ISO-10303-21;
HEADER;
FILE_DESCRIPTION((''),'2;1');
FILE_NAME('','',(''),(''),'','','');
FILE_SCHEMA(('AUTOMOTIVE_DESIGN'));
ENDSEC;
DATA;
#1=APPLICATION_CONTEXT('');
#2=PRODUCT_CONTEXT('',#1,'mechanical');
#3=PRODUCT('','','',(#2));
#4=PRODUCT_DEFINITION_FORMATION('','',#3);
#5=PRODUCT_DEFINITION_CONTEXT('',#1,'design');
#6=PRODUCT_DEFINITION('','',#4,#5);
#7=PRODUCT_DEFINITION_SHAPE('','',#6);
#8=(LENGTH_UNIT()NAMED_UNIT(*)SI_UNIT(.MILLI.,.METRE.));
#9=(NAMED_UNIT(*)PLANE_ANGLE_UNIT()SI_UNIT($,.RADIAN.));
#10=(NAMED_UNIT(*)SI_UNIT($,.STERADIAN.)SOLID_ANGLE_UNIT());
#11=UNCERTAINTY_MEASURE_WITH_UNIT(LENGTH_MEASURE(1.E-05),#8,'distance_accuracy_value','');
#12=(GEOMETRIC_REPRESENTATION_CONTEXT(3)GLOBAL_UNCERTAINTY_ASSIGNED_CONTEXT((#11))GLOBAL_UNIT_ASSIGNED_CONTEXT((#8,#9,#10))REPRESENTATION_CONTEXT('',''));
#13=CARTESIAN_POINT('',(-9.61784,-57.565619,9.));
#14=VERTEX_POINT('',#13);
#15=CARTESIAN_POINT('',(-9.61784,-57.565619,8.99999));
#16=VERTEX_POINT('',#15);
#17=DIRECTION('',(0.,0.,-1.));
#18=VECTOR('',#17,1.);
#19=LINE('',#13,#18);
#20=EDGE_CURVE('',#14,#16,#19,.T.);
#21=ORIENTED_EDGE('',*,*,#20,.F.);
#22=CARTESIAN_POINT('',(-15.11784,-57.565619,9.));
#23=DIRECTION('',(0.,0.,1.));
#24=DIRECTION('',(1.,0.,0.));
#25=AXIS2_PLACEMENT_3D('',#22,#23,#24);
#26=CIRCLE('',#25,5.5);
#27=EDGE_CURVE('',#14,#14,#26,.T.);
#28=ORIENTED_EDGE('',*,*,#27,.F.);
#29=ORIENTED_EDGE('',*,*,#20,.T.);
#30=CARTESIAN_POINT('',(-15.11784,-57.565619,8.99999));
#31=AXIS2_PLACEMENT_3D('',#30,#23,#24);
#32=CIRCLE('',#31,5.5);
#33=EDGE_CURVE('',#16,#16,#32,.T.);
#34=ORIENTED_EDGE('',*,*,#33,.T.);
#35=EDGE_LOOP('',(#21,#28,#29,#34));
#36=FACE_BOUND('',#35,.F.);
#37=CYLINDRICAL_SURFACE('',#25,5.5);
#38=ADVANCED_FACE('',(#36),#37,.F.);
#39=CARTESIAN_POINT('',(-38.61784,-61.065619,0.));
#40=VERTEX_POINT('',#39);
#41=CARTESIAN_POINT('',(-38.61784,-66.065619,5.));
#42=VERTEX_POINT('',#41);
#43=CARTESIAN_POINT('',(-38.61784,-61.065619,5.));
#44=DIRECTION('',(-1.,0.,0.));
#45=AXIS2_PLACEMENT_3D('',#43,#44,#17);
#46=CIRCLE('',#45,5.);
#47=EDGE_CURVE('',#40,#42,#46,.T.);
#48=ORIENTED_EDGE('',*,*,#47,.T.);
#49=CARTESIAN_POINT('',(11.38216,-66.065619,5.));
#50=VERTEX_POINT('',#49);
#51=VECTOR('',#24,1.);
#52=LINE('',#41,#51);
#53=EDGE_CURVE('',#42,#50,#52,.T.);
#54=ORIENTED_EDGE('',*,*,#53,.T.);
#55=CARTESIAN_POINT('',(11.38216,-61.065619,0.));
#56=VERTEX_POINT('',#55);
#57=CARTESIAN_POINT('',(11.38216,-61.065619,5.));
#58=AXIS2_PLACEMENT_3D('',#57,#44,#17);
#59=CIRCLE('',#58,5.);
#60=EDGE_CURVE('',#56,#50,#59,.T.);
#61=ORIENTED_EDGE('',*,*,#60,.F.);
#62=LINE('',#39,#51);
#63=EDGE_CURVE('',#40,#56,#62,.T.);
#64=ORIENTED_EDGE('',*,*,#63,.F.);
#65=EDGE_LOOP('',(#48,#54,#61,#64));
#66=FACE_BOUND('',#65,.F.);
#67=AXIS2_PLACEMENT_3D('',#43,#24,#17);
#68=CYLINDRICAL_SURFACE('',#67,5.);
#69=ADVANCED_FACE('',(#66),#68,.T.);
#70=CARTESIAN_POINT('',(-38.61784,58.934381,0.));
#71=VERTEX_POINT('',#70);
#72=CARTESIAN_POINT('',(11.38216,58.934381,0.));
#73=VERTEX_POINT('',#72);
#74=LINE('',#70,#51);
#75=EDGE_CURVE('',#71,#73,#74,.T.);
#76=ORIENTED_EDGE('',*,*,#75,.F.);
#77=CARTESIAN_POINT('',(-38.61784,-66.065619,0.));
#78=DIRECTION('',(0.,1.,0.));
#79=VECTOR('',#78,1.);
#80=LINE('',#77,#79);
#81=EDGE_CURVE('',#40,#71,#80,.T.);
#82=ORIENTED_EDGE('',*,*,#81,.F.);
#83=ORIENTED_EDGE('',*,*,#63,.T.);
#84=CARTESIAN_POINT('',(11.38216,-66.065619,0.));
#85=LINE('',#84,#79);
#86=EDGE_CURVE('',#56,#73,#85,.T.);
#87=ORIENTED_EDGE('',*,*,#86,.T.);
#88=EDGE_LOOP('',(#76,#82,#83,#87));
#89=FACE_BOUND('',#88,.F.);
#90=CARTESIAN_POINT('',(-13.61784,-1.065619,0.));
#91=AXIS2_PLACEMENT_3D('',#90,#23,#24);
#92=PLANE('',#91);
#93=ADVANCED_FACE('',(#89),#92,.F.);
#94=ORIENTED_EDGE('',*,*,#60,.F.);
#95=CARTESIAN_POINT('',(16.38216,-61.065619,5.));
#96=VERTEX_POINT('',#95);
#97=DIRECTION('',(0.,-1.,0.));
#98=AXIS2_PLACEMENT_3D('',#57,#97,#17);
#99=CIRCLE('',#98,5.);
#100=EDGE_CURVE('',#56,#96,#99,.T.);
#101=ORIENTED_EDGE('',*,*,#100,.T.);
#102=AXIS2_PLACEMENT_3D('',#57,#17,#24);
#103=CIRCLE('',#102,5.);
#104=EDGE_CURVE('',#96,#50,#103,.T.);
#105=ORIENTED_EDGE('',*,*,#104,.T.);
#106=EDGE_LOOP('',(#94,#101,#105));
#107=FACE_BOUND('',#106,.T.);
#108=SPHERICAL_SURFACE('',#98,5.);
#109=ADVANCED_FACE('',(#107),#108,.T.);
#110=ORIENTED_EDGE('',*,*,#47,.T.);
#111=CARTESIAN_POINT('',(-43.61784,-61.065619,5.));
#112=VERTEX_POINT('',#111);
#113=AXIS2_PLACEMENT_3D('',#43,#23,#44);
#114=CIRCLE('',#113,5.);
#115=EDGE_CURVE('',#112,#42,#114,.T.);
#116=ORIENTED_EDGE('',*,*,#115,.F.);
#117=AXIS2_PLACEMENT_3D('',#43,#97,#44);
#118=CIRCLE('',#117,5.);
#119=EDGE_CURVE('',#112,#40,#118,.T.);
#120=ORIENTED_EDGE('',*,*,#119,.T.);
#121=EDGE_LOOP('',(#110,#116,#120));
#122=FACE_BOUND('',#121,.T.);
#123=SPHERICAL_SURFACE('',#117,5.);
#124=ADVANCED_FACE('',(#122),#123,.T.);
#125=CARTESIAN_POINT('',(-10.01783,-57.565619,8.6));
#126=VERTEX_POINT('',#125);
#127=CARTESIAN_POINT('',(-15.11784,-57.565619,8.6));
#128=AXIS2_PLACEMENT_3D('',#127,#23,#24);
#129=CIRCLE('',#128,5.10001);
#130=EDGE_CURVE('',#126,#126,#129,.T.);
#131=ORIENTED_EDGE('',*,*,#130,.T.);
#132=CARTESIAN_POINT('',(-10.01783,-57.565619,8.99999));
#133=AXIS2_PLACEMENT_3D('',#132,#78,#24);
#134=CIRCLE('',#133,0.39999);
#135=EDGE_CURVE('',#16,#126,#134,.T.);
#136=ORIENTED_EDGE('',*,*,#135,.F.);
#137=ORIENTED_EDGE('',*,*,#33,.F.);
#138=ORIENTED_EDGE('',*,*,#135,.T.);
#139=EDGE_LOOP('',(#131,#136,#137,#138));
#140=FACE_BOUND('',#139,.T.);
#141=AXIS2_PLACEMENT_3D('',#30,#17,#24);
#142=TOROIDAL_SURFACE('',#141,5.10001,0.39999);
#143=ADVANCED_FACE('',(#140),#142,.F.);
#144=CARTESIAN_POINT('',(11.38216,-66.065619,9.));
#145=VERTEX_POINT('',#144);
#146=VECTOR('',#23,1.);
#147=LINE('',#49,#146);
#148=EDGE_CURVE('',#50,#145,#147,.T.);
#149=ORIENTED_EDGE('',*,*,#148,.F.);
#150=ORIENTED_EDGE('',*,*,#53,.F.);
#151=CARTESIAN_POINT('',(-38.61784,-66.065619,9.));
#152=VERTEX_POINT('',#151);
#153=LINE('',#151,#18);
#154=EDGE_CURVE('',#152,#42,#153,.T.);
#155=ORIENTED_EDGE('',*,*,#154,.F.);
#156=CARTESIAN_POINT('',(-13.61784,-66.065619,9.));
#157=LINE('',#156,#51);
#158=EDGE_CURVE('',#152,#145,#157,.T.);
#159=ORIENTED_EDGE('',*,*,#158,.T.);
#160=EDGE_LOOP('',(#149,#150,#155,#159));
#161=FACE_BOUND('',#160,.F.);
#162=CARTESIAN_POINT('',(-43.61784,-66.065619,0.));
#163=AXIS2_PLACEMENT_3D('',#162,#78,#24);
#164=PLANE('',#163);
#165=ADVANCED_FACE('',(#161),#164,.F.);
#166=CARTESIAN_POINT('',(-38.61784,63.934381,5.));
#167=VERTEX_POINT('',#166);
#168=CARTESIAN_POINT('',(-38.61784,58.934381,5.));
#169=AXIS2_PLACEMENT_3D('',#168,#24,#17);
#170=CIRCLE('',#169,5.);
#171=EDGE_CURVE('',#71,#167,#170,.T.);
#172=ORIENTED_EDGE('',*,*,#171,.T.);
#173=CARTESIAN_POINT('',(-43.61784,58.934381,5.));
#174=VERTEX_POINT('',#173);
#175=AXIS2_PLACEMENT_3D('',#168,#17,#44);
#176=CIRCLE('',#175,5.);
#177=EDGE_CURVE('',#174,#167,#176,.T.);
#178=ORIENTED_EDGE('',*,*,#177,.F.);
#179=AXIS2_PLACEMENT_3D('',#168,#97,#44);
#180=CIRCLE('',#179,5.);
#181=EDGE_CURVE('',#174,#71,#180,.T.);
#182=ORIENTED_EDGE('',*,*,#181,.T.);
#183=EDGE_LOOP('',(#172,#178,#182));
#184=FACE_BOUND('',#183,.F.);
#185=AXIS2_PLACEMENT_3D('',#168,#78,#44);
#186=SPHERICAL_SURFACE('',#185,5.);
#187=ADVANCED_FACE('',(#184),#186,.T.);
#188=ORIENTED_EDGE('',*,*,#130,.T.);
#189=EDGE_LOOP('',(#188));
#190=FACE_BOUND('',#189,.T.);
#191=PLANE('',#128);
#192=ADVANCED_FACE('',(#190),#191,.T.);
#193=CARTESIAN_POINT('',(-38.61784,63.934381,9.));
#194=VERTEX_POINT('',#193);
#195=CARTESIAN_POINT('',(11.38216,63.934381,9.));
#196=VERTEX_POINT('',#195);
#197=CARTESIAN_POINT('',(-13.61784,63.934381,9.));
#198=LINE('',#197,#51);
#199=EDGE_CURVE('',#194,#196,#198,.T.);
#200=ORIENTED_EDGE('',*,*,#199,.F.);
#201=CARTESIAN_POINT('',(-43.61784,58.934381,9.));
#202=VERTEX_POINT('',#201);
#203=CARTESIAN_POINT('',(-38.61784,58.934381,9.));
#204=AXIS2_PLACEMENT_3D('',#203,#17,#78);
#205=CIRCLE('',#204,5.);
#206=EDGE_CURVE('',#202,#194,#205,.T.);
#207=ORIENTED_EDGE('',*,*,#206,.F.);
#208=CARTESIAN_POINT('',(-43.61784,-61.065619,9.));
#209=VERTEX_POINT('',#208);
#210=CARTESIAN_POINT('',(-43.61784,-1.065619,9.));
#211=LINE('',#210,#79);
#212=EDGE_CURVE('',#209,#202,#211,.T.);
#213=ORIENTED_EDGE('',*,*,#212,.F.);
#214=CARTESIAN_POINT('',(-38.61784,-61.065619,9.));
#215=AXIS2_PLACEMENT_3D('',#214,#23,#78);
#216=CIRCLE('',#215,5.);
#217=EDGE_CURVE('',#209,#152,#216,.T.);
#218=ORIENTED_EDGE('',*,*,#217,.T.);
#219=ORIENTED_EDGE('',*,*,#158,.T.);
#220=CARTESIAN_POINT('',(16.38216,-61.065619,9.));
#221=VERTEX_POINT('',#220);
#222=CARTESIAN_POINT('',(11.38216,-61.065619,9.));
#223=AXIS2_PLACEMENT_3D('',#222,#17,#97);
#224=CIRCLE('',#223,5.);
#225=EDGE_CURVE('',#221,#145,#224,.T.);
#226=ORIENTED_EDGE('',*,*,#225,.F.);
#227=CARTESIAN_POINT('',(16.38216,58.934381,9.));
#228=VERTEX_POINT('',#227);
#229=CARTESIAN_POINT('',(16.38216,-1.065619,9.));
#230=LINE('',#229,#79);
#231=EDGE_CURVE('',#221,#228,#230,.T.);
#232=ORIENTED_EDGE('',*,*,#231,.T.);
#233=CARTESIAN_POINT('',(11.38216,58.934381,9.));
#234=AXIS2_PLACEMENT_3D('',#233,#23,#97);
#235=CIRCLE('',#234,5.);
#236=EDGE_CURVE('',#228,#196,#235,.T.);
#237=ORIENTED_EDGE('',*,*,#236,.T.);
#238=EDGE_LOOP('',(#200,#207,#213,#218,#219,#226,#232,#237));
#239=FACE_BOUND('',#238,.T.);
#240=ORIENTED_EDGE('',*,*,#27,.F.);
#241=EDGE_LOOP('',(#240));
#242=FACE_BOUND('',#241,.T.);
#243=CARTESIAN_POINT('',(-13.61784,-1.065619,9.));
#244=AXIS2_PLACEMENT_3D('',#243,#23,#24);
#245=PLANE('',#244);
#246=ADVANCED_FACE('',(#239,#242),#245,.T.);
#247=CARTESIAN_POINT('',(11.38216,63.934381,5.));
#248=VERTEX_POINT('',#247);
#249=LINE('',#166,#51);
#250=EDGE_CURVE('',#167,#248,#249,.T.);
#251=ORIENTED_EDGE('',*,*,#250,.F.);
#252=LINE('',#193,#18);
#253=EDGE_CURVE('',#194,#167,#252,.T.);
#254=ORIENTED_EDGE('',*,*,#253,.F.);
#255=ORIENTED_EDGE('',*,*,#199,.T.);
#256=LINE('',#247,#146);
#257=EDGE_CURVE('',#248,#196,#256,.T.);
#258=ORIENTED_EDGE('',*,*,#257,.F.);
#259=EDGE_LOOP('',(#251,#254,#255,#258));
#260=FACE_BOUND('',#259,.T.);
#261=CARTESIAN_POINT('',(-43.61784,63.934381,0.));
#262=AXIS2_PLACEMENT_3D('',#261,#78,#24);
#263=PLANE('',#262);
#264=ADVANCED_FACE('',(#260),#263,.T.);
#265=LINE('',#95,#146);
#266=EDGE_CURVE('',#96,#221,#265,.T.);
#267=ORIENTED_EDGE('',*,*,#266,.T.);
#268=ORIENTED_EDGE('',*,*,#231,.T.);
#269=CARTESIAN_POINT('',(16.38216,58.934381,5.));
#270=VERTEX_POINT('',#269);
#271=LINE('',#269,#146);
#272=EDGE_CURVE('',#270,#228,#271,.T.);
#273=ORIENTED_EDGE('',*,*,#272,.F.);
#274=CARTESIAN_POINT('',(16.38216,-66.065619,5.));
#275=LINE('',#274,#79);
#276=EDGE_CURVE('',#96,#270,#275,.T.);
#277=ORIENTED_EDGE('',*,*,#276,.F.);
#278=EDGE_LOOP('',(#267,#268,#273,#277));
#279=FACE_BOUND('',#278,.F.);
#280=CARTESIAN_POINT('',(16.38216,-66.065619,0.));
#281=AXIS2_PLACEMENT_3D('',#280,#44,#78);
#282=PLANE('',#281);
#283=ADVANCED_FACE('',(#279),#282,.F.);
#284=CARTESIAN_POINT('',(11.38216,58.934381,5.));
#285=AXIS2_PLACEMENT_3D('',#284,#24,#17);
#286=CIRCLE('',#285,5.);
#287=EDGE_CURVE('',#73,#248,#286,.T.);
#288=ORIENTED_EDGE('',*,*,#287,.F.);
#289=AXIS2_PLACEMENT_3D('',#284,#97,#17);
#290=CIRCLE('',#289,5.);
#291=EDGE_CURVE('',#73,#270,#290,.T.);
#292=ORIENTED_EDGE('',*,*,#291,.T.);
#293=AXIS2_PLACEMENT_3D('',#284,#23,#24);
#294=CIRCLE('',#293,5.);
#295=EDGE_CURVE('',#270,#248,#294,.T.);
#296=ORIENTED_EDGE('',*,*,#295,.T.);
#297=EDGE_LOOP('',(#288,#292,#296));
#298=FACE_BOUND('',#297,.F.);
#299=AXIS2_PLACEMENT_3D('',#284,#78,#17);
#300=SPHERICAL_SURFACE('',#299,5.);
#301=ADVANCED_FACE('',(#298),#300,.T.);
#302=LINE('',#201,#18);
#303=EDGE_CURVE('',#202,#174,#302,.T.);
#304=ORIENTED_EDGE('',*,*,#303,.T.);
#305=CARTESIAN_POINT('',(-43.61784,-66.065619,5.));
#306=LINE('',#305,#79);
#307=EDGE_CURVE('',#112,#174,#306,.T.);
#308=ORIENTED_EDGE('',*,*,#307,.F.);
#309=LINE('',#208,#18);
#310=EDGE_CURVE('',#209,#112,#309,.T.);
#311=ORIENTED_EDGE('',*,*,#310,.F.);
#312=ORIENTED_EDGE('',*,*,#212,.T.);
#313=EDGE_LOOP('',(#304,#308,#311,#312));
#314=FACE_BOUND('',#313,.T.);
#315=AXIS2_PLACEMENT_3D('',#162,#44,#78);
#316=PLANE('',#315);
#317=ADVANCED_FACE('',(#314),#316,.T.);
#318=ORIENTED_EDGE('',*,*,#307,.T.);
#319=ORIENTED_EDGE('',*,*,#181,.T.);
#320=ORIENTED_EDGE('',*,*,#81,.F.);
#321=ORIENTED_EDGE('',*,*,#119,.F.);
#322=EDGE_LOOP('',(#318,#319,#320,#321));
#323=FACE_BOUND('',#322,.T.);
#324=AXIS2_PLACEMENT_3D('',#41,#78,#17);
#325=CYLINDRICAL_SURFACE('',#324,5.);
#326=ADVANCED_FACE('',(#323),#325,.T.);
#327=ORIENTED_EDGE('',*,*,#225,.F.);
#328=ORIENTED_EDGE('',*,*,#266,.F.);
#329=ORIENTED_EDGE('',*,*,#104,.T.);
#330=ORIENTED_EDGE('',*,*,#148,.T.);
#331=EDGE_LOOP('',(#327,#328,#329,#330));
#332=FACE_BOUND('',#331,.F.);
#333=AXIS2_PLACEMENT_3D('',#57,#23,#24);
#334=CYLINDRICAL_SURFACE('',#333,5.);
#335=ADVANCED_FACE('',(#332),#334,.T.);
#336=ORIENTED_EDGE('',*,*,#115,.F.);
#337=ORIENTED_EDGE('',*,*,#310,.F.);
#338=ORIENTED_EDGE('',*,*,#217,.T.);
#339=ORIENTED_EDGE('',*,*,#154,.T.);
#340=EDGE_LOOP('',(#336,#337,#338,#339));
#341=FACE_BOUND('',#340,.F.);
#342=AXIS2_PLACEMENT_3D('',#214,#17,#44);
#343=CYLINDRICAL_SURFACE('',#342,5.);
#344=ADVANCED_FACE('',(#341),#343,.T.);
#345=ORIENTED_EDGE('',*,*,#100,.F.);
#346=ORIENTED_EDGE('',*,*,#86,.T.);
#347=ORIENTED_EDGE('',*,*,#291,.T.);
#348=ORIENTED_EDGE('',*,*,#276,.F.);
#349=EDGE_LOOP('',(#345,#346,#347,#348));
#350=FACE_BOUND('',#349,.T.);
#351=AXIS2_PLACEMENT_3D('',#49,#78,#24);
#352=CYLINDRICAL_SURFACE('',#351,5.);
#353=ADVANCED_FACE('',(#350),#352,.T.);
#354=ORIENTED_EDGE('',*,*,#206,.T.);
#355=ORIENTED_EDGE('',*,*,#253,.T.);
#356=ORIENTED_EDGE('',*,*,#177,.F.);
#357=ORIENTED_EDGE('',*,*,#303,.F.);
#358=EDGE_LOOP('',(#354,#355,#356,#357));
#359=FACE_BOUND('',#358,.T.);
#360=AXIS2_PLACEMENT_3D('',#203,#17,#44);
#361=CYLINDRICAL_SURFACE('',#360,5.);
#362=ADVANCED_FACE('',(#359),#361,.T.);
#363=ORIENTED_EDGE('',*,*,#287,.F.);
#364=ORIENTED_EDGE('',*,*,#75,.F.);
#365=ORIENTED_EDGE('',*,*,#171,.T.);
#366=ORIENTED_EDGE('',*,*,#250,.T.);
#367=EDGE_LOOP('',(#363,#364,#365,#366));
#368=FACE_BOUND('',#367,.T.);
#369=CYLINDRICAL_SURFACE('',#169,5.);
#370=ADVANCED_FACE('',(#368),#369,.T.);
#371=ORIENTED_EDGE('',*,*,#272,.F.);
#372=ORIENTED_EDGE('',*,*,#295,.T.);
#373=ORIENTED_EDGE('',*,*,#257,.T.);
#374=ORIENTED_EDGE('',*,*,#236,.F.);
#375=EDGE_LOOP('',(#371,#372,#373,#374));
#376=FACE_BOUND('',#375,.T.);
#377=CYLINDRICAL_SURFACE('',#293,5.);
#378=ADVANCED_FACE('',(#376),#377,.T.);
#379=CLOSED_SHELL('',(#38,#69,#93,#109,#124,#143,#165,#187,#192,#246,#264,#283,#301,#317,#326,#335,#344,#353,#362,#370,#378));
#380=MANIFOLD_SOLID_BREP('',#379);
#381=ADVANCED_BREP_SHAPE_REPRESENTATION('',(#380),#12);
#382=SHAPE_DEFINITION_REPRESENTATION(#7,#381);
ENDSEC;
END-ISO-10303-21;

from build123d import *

# Parameters (mm, degrees)
F0_W     = 60
F0_H     = 130
F1_DEPTH = 9
F2_R     = 5
F3_R     = 5
F4_R     = 5
F5_R     = 5
F6_R     = 5.5
F7_DEPTH = 0.4
F8_R     = 0.39999


# Not quite as in the source:
# - a fillet or chamfer is up to 0.001 mm smaller than in the source, because OpenCascade refuses the exact size


with BuildPart() as f1:
    # F0 (on Top) → F1 (new body)
    with BuildSketch(Plane.XY):
        with Locations((-13.6178402903, -1.0656192899)):
            Rectangle(F0_W, F0_H)
    extrude(amount=F1_DEPTH)

    # F2
    f2_edges = [f1.edges().sort_by_distance(p)[0] for p in [
        (16.38216, -1.065619, 0),
    ]]
    fillet(f2_edges, radius=F2_R)

    # F3
    f3_edges = [f1.edges().sort_by_distance(p)[0] for p in [
        (-43.61784, -1.065619, 0),
    ]]
    fillet(f3_edges, radius=F3_R)

    # F4
    f4_edges = [f1.edges().sort_by_distance(p)[0] for p in [
        (-13.61784, 63.934381, 0),
    ]]
    fillet(f4_edges, radius=F4_R)

    # F5
    f5_edges = [f1.edges().sort_by_distance(p)[0] for p in [
        (-13.61784, -66.065619, 0),
    ]]
    fillet(f5_edges, radius=F5_R)

    # F6 (on face) → F7 (cut)
    with BuildSketch(Plane.XY.offset(9)):
        with Locations((-15.1178402903, -57.5656192899)):
            Circle(F6_R)
    extrude(amount=-F7_DEPTH, mode=Mode.SUBTRACT)

    # F8 (radius 0.4 in the source; OpenCascade refuses exactly that, so slightly less here)
    f8_edges = [f1.edges().sort_by_distance(p)[0] for p in [
        (-20.61784, -57.565619, 8.6),
    ]]
    fillet(f8_edges, radius=F8_R)


solid = f1.part
